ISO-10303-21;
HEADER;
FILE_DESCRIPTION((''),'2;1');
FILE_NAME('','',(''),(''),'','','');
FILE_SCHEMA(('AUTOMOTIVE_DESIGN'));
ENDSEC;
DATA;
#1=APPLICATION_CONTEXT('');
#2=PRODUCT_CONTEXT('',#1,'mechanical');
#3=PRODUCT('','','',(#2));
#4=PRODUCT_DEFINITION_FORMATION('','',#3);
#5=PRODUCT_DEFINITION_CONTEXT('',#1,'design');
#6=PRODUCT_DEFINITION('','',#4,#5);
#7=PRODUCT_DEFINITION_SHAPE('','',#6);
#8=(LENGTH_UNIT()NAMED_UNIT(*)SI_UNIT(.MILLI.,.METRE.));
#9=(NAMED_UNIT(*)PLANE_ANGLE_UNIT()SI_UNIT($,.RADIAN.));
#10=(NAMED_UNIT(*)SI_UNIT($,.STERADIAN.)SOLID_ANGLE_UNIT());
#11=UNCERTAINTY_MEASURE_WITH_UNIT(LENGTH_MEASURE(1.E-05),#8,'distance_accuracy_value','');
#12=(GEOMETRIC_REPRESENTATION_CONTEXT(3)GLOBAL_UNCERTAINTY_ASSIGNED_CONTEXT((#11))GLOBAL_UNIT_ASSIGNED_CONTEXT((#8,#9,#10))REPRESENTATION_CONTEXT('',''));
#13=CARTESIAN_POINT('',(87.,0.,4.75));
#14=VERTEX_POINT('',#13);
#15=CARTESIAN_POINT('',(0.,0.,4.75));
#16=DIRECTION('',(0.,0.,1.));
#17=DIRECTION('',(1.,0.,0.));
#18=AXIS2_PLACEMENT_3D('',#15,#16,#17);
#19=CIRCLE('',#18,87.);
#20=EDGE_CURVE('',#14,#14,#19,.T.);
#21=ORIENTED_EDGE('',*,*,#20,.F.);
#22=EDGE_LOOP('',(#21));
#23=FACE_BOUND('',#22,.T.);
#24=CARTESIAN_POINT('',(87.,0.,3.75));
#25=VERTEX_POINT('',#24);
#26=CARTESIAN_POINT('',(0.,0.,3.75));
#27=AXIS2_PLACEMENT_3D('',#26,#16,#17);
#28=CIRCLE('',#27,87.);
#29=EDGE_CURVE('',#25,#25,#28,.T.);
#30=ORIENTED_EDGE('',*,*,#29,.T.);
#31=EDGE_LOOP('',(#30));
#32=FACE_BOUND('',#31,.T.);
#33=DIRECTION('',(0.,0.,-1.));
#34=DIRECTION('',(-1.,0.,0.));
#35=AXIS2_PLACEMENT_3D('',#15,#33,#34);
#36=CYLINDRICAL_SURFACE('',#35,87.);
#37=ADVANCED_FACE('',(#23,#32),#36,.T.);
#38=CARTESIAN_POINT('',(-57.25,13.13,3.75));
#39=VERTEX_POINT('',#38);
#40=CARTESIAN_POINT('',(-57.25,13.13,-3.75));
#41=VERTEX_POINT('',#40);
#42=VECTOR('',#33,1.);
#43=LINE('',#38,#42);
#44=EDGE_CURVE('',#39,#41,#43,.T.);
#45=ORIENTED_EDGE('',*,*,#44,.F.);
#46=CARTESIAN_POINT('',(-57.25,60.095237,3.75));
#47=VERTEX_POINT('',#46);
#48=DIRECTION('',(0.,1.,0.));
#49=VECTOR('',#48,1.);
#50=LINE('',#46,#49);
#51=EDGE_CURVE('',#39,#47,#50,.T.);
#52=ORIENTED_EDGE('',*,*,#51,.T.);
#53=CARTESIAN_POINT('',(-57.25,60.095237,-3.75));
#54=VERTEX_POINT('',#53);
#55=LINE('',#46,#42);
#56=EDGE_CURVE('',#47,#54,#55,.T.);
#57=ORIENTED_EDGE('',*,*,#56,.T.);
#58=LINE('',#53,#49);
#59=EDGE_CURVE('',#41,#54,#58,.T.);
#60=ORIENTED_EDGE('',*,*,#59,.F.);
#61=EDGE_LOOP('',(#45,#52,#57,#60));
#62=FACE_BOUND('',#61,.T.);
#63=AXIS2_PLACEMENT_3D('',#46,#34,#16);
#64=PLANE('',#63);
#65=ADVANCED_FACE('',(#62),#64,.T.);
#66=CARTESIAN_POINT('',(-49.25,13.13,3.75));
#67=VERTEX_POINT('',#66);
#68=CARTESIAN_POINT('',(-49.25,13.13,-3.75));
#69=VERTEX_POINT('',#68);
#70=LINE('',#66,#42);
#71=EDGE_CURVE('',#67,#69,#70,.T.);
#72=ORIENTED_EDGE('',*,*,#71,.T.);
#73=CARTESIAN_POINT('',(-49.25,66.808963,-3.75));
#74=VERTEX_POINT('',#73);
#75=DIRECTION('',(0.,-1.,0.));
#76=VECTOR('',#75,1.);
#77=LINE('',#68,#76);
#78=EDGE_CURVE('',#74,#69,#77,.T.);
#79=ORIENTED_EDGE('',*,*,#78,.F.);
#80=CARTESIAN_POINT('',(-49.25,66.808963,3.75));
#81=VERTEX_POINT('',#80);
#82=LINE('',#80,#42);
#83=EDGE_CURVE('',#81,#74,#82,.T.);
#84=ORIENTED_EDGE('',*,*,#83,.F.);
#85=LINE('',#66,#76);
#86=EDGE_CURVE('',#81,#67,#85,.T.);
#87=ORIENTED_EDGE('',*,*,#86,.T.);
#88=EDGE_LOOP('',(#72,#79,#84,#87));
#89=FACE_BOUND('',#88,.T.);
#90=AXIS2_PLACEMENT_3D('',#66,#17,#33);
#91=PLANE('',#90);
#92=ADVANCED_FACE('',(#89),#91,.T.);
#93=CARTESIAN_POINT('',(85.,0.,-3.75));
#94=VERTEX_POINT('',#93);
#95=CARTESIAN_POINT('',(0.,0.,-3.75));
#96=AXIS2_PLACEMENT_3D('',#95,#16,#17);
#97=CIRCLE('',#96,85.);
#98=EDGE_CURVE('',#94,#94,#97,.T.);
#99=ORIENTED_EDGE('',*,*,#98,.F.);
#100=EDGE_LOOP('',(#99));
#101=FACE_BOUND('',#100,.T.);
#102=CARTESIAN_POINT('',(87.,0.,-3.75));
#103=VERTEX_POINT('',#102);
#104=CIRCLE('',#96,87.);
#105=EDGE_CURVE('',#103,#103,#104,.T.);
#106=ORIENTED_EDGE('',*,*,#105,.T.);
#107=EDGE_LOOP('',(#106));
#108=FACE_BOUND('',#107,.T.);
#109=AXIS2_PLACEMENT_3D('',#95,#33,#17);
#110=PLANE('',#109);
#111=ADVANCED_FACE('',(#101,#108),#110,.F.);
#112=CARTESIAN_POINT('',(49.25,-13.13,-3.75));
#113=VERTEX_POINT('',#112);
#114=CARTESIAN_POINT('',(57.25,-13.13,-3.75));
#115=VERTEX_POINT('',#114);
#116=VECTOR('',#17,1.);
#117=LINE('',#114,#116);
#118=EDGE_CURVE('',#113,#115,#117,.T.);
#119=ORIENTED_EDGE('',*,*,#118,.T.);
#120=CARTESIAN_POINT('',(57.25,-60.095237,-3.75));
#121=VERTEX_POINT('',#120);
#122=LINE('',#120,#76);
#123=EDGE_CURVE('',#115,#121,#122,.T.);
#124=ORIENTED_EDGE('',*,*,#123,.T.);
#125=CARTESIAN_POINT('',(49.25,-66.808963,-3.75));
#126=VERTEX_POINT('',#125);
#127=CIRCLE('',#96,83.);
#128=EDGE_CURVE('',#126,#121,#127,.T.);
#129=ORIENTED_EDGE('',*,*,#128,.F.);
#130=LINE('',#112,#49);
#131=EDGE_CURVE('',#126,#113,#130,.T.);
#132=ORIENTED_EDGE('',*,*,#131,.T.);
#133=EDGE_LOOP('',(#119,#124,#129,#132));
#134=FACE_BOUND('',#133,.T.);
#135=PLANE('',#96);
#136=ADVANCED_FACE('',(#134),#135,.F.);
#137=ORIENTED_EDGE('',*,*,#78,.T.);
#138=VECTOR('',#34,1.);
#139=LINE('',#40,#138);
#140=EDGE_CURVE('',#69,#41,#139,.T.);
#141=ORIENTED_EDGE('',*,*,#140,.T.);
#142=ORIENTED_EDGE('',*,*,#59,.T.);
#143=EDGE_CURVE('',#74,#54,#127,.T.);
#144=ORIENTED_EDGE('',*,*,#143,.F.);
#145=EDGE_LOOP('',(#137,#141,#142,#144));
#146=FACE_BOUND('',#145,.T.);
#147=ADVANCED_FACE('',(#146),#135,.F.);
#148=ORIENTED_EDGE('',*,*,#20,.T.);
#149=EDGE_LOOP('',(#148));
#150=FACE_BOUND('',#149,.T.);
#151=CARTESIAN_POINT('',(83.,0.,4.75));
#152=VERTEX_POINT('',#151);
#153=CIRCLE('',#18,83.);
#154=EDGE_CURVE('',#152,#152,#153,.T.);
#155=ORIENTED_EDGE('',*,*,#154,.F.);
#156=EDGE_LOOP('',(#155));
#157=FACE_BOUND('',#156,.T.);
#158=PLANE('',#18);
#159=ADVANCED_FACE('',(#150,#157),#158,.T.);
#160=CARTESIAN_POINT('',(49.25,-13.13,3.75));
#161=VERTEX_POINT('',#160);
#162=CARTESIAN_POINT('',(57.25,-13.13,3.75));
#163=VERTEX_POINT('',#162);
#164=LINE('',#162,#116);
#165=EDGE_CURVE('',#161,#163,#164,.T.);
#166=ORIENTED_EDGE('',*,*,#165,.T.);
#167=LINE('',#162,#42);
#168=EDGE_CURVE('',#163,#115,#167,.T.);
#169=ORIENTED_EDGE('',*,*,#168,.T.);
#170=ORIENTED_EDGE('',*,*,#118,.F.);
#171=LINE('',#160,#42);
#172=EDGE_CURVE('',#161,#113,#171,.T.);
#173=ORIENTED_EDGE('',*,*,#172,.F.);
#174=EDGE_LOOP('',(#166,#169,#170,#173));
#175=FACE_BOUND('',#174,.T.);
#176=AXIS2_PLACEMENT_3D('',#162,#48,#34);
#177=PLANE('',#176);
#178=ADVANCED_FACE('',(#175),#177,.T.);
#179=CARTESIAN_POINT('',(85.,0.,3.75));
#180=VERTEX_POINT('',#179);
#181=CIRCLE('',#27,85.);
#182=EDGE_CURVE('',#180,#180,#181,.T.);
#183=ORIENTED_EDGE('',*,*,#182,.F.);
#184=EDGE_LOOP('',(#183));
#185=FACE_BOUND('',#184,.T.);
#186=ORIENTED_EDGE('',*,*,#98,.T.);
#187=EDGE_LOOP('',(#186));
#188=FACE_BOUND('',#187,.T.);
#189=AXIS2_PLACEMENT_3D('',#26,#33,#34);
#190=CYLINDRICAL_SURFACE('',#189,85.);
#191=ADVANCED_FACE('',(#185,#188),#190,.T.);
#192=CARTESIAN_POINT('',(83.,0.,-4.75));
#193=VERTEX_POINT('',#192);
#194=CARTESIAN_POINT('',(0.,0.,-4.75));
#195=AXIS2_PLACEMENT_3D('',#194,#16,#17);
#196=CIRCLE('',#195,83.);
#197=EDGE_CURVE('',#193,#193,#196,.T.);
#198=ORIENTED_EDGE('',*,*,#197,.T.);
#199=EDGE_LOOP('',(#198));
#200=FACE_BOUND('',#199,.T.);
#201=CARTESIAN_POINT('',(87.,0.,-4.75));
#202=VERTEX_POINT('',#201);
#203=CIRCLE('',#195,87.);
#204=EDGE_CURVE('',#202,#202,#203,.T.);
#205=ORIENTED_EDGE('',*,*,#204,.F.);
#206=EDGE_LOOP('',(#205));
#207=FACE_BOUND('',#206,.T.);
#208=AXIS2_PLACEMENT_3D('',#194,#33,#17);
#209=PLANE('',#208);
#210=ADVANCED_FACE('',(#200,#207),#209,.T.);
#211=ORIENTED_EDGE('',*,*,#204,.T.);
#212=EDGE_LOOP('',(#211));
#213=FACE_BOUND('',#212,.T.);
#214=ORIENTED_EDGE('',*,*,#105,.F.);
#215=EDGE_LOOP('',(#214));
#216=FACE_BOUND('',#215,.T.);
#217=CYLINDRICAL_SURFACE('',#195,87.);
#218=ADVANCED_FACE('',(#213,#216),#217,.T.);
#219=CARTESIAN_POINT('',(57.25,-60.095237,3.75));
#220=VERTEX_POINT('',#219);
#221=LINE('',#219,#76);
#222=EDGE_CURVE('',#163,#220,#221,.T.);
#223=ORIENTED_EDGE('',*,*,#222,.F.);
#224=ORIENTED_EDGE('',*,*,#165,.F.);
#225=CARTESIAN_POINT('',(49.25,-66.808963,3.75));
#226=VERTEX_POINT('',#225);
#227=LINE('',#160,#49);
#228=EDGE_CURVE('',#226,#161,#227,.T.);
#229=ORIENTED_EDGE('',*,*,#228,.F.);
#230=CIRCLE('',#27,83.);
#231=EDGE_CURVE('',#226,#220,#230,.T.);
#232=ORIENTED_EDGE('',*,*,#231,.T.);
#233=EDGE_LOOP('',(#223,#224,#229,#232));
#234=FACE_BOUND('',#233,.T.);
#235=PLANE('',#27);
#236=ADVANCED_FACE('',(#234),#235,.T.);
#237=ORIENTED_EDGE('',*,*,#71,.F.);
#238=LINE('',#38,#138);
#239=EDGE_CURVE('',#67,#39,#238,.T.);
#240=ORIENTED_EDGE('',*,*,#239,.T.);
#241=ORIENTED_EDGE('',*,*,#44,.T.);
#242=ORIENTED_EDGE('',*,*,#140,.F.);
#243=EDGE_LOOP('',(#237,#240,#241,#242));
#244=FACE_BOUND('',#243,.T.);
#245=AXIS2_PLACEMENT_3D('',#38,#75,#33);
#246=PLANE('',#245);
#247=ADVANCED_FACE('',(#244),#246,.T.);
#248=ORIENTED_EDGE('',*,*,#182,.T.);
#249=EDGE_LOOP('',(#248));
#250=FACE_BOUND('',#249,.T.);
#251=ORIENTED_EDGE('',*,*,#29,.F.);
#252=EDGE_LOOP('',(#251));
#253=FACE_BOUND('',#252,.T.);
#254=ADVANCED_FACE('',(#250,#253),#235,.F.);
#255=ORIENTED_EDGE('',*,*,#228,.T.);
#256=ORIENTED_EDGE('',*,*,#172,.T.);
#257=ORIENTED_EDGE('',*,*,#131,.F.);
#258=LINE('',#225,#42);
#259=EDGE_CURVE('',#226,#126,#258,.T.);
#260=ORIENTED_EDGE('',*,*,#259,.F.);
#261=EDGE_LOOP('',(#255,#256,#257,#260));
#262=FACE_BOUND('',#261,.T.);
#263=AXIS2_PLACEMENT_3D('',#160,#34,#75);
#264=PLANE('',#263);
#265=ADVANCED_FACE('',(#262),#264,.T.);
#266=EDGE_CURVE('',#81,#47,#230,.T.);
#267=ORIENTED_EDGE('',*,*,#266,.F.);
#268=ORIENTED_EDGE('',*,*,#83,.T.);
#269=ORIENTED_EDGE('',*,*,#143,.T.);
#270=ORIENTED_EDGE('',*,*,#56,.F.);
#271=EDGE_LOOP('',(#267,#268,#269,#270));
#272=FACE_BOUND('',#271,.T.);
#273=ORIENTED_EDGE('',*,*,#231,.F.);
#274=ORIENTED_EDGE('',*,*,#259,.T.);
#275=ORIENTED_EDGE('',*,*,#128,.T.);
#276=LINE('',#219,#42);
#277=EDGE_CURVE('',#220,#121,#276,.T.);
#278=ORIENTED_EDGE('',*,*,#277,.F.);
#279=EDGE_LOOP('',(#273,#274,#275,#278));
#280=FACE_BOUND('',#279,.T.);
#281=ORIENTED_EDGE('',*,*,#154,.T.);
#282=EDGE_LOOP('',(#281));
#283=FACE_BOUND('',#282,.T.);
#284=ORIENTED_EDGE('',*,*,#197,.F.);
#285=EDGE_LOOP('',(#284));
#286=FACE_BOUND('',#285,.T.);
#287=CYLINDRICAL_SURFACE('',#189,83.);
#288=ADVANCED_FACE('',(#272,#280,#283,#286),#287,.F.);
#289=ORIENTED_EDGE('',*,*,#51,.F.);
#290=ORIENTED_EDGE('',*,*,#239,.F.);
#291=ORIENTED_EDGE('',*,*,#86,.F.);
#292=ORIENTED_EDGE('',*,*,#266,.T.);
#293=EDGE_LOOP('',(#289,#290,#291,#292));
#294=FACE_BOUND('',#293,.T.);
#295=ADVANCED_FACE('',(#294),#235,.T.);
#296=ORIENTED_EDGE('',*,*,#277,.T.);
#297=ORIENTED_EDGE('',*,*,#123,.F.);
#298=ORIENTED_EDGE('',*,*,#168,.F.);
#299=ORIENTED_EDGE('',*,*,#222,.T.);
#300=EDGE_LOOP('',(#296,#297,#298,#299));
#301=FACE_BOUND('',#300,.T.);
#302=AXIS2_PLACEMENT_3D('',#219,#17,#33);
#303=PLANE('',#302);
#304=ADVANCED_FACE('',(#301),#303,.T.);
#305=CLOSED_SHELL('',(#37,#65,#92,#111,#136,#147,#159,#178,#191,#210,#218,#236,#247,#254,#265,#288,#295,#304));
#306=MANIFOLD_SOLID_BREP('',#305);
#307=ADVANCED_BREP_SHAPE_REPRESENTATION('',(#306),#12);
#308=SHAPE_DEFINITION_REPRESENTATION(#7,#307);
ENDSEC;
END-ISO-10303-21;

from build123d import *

# Parameters (mm, degrees)
TRACK_START     = -3.75
TRACK_OUTLINE_R = 85
TRACK_DEPTH     = 7.5
SKETCH2_R       = 87
SKETCH2_R_2     = 83
RAIL_DEPTH      = 1


# Read off the part's stored shape, not the designer's step: Track
with BuildPart() as part:
    # Track outline → Track (new body)
    with BuildSketch(Plane.XY.offset(TRACK_START)):
        Circle(TRACK_OUTLINE_R)
        with BuildLine():
            Line((57.25, -60.095236916), (57.25, -13.13))
            Line((57.25, -13.13), (49.25, -13.13))
            Line((49.25, -13.13), (49.25, -66.808962722))
            ThreePointArc((49.25, -66.808962722), (-63.578054165, -53.355702868), (-57.25, 60.095236916))
            Line((-57.25, 60.095236916), (-57.25, 13.13))
            Line((-57.25, 13.13), (-49.25, 13.13))
            Line((-49.25, 13.13), (-49.25, 66.808962722))
            ThreePointArc((-49.25, 66.808962722), (63.578054165, 53.355702868), (57.25, -60.095236916))
        make_face(mode=Mode.SUBTRACT)
    extrude(amount=TRACK_DEPTH)

    # Sketch2 → Rail (add)
    with BuildSketch(Plane.XY.offset(3.75)):
        Circle(SKETCH2_R)
        with Locations(Location((0, 0, 0), (0, 0, 133.611037517))):
            Circle(SKETCH2_R_2, mode=Mode.SUBTRACT)
    rail = extrude(amount=RAIL_DEPTH)

    # Mirror1: Rail across plane
    add(rail.mirror(Plane.XY))


solid = part.part
